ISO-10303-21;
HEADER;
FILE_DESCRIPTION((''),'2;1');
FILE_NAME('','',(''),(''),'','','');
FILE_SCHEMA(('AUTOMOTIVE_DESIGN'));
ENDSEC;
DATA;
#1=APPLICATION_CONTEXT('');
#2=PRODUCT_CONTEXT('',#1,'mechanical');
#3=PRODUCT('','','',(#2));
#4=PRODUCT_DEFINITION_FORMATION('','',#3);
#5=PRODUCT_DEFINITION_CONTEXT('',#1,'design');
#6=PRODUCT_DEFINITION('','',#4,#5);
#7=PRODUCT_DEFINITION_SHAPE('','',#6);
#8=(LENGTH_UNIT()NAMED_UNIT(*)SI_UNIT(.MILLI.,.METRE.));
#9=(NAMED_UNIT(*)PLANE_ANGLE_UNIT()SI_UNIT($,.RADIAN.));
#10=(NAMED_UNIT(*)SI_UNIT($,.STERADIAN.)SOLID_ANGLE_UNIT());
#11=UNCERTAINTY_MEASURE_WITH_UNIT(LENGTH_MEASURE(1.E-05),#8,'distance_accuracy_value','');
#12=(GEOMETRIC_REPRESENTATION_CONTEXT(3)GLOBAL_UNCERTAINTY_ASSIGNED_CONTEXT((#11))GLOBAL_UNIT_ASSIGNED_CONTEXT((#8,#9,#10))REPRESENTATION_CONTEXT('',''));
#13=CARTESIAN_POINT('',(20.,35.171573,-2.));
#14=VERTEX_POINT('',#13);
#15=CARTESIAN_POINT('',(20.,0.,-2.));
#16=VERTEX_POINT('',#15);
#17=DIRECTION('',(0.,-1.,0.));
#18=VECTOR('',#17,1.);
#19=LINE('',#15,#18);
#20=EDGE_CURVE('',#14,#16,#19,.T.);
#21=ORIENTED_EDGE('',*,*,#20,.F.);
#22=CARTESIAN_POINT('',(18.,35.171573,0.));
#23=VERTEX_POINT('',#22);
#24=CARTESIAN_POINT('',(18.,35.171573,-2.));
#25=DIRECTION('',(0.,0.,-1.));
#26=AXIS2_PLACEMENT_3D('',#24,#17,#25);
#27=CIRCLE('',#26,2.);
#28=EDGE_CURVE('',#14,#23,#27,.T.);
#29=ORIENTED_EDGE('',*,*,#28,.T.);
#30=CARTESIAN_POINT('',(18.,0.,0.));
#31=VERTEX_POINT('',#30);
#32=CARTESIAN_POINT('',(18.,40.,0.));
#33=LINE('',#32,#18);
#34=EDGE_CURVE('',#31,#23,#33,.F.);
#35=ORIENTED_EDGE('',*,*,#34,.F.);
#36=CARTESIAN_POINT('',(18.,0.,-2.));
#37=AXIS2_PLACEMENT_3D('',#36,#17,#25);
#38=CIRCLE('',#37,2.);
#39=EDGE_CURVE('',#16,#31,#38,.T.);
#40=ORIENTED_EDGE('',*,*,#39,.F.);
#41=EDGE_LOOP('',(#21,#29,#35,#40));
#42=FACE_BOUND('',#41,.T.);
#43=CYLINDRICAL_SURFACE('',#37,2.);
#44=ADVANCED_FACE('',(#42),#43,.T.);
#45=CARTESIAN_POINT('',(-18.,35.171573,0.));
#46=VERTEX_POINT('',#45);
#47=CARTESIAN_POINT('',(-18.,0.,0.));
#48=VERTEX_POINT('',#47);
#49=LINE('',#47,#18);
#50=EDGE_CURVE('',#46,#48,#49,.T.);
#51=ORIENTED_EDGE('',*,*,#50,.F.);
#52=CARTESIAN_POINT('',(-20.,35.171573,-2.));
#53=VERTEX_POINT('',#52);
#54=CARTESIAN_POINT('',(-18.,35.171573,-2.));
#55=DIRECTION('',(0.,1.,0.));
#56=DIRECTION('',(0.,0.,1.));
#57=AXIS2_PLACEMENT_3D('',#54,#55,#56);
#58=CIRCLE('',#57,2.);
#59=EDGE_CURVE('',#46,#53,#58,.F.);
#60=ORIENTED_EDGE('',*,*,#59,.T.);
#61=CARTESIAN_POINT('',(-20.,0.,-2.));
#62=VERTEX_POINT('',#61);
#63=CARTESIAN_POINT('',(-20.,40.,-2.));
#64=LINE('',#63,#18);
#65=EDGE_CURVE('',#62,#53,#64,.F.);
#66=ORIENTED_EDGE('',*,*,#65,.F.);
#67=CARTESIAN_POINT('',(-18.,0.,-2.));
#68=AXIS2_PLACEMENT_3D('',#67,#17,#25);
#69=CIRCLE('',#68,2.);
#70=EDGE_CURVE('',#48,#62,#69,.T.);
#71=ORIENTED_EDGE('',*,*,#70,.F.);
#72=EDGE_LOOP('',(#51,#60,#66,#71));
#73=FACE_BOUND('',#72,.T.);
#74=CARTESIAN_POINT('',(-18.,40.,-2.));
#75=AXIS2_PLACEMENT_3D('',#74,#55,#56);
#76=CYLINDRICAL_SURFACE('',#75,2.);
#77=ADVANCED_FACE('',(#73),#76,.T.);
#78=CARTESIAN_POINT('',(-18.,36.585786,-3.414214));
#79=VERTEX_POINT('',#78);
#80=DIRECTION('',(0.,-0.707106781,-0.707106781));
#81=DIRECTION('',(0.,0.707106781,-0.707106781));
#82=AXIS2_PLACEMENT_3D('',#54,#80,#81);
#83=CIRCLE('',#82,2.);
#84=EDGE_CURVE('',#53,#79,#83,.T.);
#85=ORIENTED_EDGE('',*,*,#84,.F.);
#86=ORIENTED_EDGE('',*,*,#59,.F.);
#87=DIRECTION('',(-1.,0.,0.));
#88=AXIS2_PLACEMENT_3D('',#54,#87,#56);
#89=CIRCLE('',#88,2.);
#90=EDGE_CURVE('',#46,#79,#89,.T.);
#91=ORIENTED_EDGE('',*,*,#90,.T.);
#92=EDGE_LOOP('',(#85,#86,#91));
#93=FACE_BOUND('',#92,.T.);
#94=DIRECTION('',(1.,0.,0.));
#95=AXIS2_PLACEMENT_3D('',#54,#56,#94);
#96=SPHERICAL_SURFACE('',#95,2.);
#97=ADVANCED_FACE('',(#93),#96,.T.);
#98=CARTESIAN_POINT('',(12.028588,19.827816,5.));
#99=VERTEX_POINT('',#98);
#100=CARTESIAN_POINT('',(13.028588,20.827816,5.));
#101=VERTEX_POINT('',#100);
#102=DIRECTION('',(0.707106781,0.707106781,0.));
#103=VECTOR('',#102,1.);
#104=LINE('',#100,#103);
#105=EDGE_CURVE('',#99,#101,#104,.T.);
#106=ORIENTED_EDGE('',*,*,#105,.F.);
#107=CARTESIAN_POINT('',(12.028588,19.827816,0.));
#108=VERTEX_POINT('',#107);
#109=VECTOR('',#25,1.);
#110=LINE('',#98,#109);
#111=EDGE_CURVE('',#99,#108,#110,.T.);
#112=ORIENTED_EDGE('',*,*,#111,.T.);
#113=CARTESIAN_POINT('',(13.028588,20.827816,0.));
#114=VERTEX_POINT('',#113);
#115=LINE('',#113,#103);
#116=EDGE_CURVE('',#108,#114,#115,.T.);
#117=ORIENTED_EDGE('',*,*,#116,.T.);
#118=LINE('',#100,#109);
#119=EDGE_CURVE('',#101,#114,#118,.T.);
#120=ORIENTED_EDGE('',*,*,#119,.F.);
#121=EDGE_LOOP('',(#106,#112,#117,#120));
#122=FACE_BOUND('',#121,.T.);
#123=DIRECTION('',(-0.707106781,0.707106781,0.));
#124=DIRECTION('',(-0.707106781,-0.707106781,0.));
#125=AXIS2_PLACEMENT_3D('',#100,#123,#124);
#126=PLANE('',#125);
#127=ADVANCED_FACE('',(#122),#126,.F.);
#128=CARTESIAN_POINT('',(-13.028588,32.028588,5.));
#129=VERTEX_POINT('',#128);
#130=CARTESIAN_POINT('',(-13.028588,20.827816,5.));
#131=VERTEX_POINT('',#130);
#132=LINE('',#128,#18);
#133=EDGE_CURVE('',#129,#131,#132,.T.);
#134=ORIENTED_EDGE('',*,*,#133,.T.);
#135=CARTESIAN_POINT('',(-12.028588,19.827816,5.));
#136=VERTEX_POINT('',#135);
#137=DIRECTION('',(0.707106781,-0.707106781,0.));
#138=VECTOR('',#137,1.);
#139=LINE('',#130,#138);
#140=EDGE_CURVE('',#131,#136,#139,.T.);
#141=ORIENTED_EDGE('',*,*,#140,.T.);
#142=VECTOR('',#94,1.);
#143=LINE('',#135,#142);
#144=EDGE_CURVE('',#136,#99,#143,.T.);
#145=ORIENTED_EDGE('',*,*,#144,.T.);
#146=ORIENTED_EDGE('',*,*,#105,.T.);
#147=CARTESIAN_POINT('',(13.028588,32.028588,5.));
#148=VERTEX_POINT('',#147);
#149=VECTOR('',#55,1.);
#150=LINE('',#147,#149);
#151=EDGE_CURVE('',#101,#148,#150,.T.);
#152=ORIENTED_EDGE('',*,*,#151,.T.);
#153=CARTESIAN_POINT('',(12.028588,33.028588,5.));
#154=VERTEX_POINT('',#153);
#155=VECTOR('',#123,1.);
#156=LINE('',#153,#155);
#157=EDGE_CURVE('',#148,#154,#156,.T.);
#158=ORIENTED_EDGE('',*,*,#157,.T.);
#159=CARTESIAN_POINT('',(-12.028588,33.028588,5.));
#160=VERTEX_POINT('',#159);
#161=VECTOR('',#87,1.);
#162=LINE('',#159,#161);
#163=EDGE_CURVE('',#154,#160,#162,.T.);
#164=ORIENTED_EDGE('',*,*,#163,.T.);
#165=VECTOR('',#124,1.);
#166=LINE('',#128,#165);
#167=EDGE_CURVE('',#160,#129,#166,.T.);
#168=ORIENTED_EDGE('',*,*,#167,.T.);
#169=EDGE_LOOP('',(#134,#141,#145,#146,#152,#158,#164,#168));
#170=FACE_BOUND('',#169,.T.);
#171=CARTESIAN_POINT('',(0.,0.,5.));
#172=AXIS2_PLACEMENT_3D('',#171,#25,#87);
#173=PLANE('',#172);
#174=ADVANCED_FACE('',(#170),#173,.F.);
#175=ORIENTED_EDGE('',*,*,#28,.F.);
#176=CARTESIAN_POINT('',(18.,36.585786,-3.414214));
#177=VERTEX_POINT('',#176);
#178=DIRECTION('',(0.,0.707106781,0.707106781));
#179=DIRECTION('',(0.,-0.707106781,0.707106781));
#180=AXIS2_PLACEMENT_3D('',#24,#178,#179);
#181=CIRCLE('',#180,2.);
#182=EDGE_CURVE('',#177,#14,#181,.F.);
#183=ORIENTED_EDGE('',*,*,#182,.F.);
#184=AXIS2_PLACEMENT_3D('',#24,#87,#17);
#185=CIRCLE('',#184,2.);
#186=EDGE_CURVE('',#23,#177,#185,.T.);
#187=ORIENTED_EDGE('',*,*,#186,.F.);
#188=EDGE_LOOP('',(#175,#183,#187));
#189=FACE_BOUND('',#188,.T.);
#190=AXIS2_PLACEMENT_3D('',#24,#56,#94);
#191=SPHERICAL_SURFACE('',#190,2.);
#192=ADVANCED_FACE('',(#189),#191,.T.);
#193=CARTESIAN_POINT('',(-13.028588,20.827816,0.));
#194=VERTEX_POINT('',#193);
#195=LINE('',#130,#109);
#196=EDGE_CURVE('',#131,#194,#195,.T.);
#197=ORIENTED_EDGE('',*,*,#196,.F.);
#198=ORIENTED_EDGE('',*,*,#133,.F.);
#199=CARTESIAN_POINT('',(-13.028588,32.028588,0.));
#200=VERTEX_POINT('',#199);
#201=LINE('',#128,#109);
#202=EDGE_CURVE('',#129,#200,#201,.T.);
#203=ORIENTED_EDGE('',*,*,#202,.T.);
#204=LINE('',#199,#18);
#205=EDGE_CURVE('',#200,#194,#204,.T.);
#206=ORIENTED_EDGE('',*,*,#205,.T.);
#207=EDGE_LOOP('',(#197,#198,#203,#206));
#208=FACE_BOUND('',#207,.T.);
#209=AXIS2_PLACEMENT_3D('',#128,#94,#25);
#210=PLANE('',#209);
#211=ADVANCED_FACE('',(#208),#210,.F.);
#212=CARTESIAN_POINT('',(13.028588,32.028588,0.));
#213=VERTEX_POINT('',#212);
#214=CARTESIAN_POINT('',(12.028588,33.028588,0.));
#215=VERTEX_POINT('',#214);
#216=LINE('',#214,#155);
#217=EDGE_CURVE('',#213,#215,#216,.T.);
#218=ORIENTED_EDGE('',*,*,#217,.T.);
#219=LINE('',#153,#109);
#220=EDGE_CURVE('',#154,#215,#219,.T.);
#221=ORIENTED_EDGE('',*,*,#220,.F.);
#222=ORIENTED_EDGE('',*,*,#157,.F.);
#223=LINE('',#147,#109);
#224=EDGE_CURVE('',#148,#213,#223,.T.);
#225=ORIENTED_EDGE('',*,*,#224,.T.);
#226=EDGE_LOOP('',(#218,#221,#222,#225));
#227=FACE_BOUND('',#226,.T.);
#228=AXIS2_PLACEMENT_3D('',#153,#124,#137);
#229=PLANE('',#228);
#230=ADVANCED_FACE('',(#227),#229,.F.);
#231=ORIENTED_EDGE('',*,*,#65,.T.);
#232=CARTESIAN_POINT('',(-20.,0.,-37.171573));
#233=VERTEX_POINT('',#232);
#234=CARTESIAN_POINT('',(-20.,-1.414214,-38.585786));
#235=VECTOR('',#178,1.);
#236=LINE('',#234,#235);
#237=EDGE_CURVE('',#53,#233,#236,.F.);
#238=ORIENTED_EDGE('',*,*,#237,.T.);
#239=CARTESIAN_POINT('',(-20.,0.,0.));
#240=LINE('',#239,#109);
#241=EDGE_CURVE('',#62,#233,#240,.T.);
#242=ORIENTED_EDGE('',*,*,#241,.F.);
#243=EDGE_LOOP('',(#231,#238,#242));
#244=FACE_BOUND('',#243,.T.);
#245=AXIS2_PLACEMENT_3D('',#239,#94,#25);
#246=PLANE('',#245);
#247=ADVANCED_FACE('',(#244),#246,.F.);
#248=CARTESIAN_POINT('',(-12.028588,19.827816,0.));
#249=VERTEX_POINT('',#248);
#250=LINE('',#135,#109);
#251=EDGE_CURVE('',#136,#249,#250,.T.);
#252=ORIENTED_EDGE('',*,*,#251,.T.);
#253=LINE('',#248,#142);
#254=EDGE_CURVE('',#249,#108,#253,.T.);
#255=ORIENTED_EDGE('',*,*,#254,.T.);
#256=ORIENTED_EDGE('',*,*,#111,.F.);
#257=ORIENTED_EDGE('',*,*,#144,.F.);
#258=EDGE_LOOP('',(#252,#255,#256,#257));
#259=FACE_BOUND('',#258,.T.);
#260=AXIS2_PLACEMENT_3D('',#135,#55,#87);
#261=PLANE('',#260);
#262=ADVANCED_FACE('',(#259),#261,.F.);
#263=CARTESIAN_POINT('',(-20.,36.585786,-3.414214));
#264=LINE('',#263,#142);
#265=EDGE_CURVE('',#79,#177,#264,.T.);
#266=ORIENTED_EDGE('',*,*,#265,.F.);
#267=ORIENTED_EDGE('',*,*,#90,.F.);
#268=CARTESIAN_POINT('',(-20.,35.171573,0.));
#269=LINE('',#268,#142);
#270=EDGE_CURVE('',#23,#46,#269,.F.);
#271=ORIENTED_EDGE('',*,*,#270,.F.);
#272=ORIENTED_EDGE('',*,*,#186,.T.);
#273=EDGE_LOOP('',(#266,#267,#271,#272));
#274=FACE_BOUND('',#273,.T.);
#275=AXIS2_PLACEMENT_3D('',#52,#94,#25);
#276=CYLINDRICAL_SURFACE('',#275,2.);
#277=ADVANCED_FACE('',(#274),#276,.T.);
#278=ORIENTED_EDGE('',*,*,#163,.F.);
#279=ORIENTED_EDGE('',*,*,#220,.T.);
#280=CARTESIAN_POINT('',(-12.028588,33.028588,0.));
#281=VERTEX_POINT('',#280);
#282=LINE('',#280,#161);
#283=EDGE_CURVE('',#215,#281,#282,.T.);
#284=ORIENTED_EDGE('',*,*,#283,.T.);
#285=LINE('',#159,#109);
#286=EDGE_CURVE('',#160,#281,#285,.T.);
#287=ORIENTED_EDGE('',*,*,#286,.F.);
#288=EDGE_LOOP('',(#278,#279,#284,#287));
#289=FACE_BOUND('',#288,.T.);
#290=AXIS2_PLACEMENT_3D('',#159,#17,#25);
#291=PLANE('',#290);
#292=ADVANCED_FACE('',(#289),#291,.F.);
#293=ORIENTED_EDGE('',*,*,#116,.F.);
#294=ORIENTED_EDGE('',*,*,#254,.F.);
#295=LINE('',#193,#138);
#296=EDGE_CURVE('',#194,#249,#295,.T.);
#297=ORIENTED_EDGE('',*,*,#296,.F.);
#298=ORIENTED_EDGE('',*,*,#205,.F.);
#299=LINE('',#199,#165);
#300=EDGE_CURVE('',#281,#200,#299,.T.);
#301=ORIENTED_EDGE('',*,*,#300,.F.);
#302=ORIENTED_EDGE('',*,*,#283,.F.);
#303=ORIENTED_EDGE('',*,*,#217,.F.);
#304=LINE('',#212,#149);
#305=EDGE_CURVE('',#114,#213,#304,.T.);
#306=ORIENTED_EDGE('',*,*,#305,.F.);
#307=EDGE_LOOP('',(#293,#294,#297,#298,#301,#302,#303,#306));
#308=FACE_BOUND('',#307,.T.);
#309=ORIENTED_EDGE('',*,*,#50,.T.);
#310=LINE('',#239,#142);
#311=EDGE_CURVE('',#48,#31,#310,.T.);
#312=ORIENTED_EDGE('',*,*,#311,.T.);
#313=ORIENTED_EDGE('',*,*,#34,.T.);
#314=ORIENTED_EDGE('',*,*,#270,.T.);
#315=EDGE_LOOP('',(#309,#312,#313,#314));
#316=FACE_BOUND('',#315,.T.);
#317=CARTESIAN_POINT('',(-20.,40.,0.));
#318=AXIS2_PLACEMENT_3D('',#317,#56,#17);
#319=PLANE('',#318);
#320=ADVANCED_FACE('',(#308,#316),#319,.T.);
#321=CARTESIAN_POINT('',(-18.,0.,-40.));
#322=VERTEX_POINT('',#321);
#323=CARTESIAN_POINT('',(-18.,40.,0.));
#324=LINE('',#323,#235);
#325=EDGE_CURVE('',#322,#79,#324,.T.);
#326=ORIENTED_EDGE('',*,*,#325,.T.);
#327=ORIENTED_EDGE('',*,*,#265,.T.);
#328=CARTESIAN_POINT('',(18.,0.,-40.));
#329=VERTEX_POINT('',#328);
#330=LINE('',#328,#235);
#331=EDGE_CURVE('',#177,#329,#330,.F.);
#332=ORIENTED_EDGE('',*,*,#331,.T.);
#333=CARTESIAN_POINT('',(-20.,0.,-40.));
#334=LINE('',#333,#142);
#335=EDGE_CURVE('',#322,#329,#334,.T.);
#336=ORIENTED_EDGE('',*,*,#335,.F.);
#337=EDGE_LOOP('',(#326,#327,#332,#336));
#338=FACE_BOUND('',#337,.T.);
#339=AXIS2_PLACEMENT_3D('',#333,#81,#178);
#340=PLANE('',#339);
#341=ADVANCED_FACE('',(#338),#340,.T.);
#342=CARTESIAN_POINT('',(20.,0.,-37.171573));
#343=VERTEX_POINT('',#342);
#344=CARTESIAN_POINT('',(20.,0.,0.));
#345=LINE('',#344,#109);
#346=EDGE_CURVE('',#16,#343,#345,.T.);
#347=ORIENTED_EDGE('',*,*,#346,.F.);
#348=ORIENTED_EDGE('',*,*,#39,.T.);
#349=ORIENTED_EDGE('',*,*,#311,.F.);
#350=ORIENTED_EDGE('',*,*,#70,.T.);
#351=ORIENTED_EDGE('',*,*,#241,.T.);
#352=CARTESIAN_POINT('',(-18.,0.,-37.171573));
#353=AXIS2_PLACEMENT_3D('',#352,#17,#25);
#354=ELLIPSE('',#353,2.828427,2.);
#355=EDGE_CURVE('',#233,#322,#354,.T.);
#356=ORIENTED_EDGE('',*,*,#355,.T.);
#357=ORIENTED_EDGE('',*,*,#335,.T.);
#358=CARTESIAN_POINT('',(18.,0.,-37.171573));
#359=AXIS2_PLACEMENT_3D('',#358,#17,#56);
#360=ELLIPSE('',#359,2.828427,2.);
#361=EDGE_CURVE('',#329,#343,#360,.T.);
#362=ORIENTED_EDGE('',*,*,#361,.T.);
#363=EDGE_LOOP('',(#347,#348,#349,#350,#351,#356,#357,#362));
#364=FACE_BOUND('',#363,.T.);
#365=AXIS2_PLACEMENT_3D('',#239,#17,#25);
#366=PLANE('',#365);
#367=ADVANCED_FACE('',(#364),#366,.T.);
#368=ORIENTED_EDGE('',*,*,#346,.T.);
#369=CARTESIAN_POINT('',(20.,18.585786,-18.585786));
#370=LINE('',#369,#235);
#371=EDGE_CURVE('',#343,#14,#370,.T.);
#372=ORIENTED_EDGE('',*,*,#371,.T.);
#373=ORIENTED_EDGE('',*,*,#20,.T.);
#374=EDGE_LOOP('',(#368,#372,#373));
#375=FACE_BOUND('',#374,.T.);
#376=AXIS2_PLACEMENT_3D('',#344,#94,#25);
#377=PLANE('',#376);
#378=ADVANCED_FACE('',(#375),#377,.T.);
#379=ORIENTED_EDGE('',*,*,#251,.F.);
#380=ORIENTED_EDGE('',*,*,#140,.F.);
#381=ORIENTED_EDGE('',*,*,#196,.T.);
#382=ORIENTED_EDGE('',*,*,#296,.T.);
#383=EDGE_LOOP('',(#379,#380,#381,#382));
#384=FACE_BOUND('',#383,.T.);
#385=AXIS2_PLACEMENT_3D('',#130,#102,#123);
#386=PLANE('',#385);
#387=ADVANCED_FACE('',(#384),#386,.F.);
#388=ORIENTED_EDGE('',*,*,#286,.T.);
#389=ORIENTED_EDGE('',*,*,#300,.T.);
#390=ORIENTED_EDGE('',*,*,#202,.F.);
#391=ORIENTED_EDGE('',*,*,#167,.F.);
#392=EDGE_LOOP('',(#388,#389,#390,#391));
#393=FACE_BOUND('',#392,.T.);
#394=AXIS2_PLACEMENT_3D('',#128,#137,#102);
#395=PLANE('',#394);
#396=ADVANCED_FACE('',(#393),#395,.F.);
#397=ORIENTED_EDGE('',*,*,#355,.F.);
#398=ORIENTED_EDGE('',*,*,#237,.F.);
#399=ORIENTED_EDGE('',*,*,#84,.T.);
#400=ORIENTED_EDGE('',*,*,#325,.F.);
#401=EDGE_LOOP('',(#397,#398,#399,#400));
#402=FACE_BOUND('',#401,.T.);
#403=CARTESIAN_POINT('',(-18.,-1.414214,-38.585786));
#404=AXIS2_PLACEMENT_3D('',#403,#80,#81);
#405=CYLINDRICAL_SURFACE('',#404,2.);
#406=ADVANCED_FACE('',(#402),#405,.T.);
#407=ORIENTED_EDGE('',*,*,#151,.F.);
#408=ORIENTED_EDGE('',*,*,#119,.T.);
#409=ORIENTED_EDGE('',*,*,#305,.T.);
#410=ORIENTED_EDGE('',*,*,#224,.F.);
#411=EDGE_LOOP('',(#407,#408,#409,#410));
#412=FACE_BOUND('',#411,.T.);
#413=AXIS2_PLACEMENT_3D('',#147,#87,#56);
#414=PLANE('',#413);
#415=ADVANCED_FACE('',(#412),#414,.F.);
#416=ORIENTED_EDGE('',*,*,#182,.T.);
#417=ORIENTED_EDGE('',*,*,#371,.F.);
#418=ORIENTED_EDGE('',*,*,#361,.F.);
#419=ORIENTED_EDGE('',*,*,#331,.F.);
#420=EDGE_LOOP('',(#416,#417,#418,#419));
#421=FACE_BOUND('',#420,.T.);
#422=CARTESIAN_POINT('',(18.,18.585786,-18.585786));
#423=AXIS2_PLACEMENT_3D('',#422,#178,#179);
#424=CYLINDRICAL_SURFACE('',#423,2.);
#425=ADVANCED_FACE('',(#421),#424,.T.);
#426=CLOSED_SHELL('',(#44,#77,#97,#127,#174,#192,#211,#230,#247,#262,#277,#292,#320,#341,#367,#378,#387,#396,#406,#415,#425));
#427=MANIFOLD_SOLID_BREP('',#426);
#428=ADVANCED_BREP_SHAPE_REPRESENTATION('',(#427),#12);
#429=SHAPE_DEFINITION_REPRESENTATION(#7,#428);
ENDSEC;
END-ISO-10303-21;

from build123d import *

# Parameters (mm, degrees)
Y_KSEKLIK_EKSTR_ZYON1_DEPTH      = 20
Y_KSEKLIK_EKSTR_ZYON1_DEPTH_BACK = 20
Y_KSEKLIK_EKSTR_ZYON2_DEPTH      = 5
RADYUS1_R                        = 2
RADYUS2_R                        = 2


with BuildPart() as part:
    # Çizim1 → Yükseklik-Ekstrüzyon1 (new, two sides: drawn at the far end of the back side and taken through both)
    with BuildSketch(Plane(origin=(0, 0, 0), x_dir=(0, 0, -1), z_dir=(1, 0, 0)).offset(-Y_KSEKLIK_EKSTR_ZYON1_DEPTH_BACK)):
        Polygon((0, 0), (40, 0), (0, 40), align=None)
    extrude(amount=Y_KSEKLIK_EKSTR_ZYON1_DEPTH + Y_KSEKLIK_EKSTR_ZYON1_DEPTH_BACK)

    # Çizim3 → Yükseklik-Ekstrüzyon2 (add)
    with BuildSketch(Plane.XY):
        Polygon((-13.028588348, 32.028588348), (-12.028588348, 33.028588348), (12.028588348, 33.028588348), (13.028588348, 32.028588348), (13.028588348, 20.827816013), (12.028588348, 19.827816013), (-12.028588348, 19.827816013), (-13.028588348, 20.827816013), align=None)
    extrude(amount=Y_KSEKLIK_EKSTR_ZYON2_DEPTH)

    # Radyus1
    radyus1_edges = [part.edges().sort_by_distance(p)[0] for p in [
        (20, 20, 0),
        (20, 20, -20),
        (-20, 20, -20),
        (-20, 20, 0),
    ]]
    fillet(radyus1_edges, radius=RADYUS1_R)

    # Radyus2
    # the kernel refuses this fillet: 2 mm, written as the material it takes off along each edge
    with BuildSketch(Plane(origin=(18, 35.171572875, -2), x_dir=(0, 0, 1), z_dir=(1, 0, 0))) as radyus2_piece_1_section:
        Polygon((0, 0), (RADYUS2_R, 0), (RADYUS2_R, -RADYUS2_R * 2.41421356237), (-RADYUS2_R * 0.707106781187, -RADYUS2_R * 0.707106781187), align=None)
    radyus2_piece_1 = extrude(amount=RADYUS2_R, mode=Mode.PRIVATE)
    radyus2_piece_1 = radyus2_piece_1 - Plane(origin=(18, 35.171572875, -2), x_dir=(0, -0.9238795325112866, -0.38268343236508967), z_dir=(1, 0, 0)) * Sphere(RADYUS2_R, mode=Mode.PRIVATE)
    add(radyus2_piece_1, mode=Mode.SUBTRACT)
    with BuildSketch(Plane(origin=(-18, 35.171572875, -2), x_dir=(0, 0, 1), z_dir=(-1, 0, 0))) as radyus2_piece_2_section:
        Polygon((0, 0), (RADYUS2_R, 0), (RADYUS2_R, RADYUS2_R * 2.41421356237), (-RADYUS2_R * 0.707106781187, RADYUS2_R * 0.707106781187), align=None)
    radyus2_piece_2 = extrude(amount=RADYUS2_R, mode=Mode.PRIVATE)
    radyus2_piece_2 = radyus2_piece_2 - Plane(origin=(-18, 35.171572875, -2), x_dir=(0, -0.9238795325112866, -0.38268343236508967), z_dir=(-1, 0, 0)) * Sphere(RADYUS2_R, mode=Mode.PRIVATE)
    add(radyus2_piece_2, mode=Mode.SUBTRACT)
    with BuildSketch(Plane(origin=(18, 40, 0), x_dir=(0, -1, 0), z_dir=(-1, 0, 0))) as radyus2_piece_3:
        with BuildLine():
            CenterArc((RADYUS2_R * 2.41421356237, -RADYUS2_R), RADYUS2_R, 90, 135)
            Line((RADYUS2_R * 1.70710678119, -RADYUS2_R * 1.70710678119), (0, 0))
            Line((0, 0), (RADYUS2_R * 2.41421356237, 0))
        make_face()
    extrude(amount=36, mode=Mode.SUBTRACT)


solid = part.part
